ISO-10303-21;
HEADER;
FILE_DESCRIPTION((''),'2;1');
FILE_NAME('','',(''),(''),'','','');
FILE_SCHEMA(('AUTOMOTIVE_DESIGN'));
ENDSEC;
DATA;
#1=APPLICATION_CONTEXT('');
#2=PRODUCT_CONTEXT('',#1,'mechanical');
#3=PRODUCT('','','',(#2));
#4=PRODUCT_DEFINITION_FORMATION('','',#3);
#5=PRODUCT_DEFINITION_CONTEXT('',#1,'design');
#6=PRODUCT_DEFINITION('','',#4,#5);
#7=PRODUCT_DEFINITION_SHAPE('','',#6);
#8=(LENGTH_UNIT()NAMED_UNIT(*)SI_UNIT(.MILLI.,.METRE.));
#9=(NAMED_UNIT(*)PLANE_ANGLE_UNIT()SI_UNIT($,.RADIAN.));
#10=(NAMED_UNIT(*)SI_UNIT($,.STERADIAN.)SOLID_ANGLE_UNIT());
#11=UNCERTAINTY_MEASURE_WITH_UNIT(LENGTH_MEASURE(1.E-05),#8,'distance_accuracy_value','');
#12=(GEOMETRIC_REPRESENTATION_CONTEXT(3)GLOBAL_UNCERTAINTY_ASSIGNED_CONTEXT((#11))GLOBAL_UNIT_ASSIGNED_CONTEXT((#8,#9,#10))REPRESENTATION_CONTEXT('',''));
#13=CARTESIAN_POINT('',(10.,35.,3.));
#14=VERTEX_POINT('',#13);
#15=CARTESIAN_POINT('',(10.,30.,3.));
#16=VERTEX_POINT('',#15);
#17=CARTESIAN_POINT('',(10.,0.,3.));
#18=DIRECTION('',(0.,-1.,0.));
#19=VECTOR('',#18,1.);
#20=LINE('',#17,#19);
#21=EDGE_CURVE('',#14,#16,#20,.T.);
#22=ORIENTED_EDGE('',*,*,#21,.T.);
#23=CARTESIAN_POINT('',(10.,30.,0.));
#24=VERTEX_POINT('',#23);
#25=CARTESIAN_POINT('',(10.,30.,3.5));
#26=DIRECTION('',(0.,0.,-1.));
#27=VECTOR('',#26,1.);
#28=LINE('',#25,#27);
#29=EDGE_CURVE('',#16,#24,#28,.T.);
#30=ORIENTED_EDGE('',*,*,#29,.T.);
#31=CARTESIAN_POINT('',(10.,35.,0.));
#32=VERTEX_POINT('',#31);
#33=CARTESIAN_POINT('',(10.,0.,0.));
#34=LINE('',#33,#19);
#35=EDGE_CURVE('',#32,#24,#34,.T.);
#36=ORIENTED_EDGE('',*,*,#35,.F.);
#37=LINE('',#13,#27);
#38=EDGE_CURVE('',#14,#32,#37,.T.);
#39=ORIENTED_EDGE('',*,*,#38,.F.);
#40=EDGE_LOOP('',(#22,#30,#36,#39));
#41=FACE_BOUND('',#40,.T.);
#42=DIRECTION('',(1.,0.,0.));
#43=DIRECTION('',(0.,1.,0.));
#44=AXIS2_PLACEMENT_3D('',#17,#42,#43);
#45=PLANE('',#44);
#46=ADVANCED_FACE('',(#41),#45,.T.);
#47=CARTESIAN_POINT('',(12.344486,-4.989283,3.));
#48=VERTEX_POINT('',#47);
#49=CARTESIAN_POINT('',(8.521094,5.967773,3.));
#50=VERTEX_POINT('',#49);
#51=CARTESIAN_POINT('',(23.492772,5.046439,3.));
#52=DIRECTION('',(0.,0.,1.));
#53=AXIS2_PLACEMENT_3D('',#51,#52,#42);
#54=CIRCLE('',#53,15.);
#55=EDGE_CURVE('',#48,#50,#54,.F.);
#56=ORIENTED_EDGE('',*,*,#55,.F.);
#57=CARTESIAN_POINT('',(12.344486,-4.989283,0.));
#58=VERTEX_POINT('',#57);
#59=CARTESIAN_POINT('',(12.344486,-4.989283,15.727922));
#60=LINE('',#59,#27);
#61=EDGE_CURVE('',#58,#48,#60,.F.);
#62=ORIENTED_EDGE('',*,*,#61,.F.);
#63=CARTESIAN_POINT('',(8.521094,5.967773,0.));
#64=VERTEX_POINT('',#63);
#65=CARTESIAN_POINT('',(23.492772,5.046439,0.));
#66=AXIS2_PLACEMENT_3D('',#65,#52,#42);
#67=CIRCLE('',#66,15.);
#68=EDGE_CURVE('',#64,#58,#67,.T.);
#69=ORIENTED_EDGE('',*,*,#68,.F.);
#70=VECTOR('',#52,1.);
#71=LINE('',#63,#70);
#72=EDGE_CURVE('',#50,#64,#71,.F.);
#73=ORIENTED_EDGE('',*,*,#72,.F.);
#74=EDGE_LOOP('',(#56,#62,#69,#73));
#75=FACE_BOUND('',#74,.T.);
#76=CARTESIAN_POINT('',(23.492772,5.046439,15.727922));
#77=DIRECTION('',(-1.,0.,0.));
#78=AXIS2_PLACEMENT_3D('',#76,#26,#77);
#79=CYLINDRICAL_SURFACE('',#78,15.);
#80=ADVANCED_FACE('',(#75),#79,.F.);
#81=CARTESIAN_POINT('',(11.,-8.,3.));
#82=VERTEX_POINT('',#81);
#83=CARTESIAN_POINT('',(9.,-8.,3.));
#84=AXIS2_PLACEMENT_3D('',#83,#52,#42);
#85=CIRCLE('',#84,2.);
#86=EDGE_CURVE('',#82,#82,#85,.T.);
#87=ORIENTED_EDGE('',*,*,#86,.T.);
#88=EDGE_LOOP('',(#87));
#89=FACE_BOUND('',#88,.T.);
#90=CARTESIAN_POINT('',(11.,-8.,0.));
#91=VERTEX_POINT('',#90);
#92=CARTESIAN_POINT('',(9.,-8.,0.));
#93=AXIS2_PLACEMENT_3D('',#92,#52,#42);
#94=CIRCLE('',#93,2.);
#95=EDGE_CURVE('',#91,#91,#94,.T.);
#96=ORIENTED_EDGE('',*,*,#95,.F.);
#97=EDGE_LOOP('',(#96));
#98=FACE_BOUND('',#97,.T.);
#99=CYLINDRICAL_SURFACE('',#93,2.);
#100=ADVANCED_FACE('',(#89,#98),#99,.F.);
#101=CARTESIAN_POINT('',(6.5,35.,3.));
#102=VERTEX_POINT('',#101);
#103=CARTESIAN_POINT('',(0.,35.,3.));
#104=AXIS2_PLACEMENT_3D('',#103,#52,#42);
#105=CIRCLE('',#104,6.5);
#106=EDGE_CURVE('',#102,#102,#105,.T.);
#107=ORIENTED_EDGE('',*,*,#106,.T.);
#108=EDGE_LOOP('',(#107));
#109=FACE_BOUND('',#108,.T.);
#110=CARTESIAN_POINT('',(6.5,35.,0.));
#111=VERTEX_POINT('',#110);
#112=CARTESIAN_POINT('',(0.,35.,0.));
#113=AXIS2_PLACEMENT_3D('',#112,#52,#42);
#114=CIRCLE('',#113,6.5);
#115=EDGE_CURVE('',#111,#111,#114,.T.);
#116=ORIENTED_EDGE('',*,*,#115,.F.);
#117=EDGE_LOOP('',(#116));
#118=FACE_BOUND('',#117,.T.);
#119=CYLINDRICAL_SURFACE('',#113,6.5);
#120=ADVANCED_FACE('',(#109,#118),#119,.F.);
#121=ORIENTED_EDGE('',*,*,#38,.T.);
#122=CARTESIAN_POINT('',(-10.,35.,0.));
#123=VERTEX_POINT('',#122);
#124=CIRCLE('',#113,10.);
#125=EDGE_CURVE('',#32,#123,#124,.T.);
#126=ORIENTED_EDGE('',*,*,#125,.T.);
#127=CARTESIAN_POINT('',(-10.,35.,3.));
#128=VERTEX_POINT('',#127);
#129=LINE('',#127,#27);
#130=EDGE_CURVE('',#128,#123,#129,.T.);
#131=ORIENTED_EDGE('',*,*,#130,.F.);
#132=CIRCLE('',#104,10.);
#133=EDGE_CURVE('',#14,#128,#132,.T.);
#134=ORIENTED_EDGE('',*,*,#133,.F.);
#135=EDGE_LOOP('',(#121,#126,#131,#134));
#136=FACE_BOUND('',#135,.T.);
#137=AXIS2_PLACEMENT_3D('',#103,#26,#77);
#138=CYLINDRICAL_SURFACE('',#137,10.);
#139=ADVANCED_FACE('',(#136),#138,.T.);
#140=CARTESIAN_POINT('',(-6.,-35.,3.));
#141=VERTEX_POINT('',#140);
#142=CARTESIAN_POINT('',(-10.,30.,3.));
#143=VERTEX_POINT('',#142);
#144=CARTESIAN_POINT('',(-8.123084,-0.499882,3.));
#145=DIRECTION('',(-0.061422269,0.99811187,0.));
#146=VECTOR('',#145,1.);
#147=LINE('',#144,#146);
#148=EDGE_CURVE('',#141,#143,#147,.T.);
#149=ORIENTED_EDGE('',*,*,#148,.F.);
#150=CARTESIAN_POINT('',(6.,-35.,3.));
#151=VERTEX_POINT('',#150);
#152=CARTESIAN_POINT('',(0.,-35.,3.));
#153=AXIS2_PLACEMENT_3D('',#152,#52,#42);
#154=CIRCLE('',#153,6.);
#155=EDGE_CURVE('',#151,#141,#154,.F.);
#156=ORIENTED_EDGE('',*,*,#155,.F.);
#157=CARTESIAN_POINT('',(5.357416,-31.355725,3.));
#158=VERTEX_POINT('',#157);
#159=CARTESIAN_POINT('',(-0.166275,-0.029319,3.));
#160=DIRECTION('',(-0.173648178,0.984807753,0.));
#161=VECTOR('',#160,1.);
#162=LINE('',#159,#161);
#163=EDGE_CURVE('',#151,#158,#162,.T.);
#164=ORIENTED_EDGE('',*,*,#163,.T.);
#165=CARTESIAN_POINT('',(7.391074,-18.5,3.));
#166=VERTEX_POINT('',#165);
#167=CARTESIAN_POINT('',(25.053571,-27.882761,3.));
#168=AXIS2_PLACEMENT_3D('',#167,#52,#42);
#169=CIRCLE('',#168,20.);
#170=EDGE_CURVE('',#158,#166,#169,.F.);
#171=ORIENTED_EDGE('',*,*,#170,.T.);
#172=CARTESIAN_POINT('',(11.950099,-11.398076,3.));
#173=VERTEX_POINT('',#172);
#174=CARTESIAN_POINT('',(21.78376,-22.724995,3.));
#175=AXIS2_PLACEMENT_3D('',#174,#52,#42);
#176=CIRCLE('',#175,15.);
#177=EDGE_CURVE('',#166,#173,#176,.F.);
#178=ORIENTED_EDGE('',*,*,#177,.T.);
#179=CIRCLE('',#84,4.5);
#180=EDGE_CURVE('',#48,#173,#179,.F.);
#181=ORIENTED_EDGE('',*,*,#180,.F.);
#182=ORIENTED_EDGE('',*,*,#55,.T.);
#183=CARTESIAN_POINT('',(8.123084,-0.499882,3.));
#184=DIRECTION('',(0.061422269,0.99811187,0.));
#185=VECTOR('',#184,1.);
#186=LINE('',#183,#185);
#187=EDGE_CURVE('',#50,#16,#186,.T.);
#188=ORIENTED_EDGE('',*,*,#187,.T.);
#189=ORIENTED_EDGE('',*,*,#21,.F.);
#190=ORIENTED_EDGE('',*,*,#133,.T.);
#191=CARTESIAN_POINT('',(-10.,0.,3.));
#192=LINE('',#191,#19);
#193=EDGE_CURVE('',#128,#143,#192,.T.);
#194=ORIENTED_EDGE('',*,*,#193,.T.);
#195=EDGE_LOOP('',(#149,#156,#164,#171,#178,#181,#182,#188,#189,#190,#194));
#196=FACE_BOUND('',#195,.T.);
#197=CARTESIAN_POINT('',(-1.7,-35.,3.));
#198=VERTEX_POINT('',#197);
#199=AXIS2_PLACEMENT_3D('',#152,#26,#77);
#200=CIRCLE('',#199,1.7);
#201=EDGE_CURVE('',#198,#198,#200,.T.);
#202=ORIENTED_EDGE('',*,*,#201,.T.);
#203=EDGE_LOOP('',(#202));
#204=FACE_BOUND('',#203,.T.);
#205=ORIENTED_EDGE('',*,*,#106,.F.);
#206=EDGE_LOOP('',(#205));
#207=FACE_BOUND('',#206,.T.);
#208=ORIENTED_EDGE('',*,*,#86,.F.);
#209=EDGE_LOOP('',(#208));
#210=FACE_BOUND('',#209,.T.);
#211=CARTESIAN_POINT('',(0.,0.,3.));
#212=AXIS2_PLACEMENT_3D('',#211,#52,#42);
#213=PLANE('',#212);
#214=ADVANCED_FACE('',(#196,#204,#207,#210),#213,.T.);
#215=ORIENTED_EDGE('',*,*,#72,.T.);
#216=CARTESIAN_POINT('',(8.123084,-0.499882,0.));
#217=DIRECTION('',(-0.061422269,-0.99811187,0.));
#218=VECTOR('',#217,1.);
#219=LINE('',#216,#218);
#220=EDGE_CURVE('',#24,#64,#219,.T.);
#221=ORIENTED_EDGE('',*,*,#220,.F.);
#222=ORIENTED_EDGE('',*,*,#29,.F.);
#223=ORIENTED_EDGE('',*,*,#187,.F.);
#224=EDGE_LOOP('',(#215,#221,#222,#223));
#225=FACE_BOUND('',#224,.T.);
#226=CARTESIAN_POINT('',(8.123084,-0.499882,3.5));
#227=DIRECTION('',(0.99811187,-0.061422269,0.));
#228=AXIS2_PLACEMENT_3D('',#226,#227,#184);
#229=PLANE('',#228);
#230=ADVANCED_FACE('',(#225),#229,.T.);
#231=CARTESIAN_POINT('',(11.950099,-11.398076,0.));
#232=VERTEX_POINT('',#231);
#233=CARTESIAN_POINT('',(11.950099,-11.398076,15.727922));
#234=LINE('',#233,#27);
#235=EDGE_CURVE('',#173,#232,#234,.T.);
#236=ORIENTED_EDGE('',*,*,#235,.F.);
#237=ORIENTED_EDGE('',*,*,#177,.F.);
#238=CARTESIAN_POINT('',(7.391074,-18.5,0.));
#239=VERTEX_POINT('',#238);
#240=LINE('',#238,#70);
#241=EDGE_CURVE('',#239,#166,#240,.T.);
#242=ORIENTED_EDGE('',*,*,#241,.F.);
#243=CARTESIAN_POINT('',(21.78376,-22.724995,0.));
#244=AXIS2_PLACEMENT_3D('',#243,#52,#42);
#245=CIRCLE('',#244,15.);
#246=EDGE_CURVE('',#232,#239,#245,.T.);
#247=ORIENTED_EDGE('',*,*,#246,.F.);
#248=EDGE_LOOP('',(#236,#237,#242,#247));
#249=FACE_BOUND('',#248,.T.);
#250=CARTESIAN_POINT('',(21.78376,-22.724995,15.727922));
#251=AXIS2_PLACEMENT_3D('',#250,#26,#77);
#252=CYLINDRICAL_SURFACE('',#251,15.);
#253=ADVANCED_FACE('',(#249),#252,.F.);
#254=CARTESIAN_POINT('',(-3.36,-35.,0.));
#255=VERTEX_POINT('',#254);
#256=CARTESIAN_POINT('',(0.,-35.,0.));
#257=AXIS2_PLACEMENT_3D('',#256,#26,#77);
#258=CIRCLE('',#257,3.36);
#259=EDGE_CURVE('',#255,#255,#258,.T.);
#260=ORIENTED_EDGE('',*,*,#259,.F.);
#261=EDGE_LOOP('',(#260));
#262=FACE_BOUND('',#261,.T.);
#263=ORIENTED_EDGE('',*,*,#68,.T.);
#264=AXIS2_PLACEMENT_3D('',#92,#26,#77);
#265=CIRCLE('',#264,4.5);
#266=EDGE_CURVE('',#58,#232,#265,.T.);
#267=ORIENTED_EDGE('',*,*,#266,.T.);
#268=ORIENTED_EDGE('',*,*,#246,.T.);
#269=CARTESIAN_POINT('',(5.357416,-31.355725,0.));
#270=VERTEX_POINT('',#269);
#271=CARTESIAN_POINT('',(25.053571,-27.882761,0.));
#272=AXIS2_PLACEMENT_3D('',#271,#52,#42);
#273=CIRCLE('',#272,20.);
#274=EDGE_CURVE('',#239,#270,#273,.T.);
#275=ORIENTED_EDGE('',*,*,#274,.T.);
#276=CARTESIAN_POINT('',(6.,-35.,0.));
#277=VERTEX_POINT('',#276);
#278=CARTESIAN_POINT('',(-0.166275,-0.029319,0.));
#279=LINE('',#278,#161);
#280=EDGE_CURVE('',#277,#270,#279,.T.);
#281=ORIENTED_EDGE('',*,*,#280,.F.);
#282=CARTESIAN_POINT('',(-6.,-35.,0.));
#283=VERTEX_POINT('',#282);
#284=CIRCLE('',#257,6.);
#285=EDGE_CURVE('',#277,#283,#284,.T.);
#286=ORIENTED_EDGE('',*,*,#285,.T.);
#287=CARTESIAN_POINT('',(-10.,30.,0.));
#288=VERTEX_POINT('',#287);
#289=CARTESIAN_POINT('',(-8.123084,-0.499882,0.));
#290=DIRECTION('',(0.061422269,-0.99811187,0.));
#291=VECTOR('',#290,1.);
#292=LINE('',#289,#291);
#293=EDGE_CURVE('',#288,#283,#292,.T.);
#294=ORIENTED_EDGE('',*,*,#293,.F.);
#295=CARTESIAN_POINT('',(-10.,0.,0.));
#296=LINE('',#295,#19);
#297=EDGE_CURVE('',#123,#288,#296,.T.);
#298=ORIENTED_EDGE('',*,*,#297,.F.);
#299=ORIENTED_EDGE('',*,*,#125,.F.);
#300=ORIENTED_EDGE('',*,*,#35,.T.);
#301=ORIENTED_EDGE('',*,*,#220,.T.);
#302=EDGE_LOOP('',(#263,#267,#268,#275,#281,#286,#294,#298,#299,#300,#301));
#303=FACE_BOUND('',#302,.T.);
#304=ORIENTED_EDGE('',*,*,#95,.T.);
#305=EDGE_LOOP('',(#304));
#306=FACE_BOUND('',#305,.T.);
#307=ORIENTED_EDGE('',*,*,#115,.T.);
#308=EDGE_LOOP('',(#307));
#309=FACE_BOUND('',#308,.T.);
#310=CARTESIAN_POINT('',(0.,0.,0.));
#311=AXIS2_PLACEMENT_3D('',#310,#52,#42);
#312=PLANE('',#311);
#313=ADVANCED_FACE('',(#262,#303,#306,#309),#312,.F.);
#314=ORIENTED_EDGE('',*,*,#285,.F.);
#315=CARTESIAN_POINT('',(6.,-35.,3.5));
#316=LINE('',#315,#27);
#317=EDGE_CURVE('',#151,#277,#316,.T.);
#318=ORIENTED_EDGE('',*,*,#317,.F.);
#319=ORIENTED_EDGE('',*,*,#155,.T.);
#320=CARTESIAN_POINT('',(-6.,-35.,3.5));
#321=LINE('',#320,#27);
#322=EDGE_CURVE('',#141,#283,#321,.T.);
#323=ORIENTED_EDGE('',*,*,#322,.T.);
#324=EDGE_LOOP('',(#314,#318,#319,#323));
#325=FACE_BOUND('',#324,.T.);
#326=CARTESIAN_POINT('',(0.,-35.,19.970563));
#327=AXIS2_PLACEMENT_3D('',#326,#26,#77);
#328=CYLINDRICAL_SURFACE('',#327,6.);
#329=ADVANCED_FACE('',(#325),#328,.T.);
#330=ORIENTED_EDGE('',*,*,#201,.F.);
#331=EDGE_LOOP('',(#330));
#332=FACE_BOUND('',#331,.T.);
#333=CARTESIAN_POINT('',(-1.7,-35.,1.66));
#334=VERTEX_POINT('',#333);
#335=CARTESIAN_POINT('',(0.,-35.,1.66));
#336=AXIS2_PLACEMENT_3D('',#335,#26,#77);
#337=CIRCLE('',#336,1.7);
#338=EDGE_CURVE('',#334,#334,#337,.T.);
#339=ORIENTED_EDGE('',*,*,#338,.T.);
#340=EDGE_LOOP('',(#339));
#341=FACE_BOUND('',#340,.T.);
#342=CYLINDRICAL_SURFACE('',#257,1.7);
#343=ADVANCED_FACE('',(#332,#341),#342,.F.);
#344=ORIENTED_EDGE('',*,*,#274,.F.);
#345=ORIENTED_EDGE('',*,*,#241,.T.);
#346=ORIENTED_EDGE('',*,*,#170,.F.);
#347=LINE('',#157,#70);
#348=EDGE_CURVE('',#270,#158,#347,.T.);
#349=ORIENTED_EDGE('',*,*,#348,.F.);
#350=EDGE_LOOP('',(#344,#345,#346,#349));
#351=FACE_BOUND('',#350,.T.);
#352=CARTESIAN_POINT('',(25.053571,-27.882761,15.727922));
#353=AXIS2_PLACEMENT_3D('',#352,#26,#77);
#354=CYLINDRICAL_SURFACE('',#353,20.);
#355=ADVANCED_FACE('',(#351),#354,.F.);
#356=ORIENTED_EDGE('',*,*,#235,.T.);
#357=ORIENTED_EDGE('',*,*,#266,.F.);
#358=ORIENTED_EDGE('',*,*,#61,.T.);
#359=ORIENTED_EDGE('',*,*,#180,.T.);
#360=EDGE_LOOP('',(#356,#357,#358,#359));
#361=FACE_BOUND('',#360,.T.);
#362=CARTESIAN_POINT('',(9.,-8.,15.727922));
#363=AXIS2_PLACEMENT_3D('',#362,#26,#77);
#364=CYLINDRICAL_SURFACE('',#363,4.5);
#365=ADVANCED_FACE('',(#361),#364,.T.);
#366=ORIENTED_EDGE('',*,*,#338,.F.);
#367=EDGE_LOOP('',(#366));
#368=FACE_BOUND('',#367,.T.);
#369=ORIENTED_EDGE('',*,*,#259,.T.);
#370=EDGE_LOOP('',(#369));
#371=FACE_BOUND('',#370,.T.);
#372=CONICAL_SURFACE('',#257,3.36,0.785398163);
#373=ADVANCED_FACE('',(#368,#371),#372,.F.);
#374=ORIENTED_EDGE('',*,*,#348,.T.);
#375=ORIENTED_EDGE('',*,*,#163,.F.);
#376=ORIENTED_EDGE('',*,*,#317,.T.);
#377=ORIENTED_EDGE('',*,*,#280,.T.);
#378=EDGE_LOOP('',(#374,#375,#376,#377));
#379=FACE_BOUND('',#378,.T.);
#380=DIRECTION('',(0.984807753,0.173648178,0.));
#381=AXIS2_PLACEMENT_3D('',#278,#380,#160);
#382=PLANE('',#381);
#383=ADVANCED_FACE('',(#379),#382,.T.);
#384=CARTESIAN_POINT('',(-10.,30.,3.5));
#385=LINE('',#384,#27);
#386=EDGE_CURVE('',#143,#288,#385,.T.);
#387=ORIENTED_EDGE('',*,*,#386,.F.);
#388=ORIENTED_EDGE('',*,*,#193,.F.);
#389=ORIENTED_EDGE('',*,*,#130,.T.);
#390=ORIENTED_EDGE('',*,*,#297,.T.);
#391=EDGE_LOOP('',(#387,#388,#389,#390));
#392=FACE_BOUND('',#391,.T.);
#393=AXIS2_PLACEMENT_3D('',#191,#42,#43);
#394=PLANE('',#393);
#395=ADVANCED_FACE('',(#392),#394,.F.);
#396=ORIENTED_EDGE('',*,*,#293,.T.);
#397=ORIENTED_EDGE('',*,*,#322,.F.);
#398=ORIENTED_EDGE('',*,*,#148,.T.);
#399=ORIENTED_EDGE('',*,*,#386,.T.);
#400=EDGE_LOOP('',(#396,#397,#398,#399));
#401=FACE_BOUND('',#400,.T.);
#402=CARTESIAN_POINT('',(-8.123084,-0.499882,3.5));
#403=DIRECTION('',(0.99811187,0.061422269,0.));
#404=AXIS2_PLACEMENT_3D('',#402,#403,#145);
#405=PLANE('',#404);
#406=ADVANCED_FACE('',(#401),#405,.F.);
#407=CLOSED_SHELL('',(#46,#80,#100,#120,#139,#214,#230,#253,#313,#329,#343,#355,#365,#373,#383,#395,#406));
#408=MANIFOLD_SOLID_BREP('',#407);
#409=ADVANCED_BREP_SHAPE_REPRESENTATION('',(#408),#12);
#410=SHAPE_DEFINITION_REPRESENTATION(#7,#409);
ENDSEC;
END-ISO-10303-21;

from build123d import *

# Parameters (mm, degrees)
EXTRUDE_1_DEPTH     = 3
SKETCH_2_R          = 6.5
CUT_EXTRUDE_1_DEPTH = 47.19523785
CUT_EXTRUDE_3_DEPTH = 3.5
SKETCH_4_3_R        = 6
EXTRUDE_3_DEPTH     = 3
SKETCH_5_R          = 1.5
CUT_EXTRUDE_4_DEPTH = 47.19523785
SKETCH_6_R          = 4.5
EXTRUDE_4_DEPTH     = 3
FILLET_1_R          = 15
SKETCH_8_R          = 2
CUT_EXTRUDE_5_DEPTH = 48.077064479
CUT_EXTRUDE_9_DEPTH = 48.077064479
FILLET_3_R          = 20


with BuildPart() as part:
    # 草图1 → 凸台-拉伸1 (new body)
    with BuildSketch(Plane.XY):
        with BuildLine():
            ThreePointArc((10, 35), (0, 45), (-10, 35))
            Line((-10, 35), (10, 35))
        make_face()
        with BuildLine():
            Line((10, 35), (-10, 35))
            ThreePointArc((-10, 35), (0, 25), (10, 35))
        make_face()
        with BuildLine():
            ThreePointArc((10, 35), (0, 25), (-10, 35))
            Line((-10, 35), (-10, -35))
            Line((-10, -35), (10, -35))
            Line((10, -35), (10, 35))
        make_face()
    extrude(amount=EXTRUDE_1_DEPTH)

    # 草图2 → 切除-拉伸1 (cut, through all)
    with BuildSketch(Plane.XY.offset(3)):
        with Locations((0, 35)):
            Circle(SKETCH_2_R)
    extrude(amount=-CUT_EXTRUDE_1_DEPTH, mode=Mode.SUBTRACT)

    # 草图4 → 切除-拉伸3 (cut)
    with BuildSketch(Plane(origin=(0, 0, 0), x_dir=(-1, 0, 0), z_dir=(0, 0, -1))):
        Polygon((10, 30), (6, -35), (10, -35), align=None)
        Polygon((-10, -35), (-6, -35), (-10, 30), align=None)
    extrude(amount=-CUT_EXTRUDE_3_DEPTH, mode=Mode.SUBTRACT)

    # 草图4<3> → 凸台-拉伸3 (add)
    with BuildSketch(Plane(origin=(0, 0, 0), x_dir=(-1, 0, 0), z_dir=(0, 0, -1))):
        with Locations((0, -35)):
            Circle(SKETCH_4_3_R)
    extrude(amount=-EXTRUDE_3_DEPTH)

    # 草图5 → 切除-拉伸4 (cut, through all)
    with BuildSketch(Plane(origin=(0, 0, 0), x_dir=(-1, 0, 0), z_dir=(0, 0, -1))):
        with Locations((0, -35)):
            Circle(SKETCH_5_R)
    extrude(amount=-CUT_EXTRUDE_4_DEPTH, mode=Mode.SUBTRACT)

    # 草图6 → 凸台-拉伸4 (add)
    with BuildSketch(Plane(origin=(0, 0, 0), x_dir=(-1, 0, 0), z_dir=(0, 0, -1))):
        with Locations((-9, -8)):
            Circle(SKETCH_6_R)
    extrude(amount=-EXTRUDE_4_DEPTH)

    # 圆角1
    fillet_1_edges = [part.edges().sort_by_distance(p)[0] for p in [
        (7.930527209, -3.628932859, 1.5),
        (7.402648929, -12.206954903, 1.5),
    ]]
    fillet(fillet_1_edges, radius=FILLET_1_R)

    # 草图8 → 切除-拉伸5 (cut, through all)
    with BuildSketch(Plane.XY.offset(3)):
        with Locations((9, -8)):
            Circle(SKETCH_8_R)
    extrude(amount=-CUT_EXTRUDE_5_DEPTH, mode=Mode.SUBTRACT)

    # 草图11 → 切除-拉伸9 (cut, through all)
    with BuildSketch(Plane.XY.offset(3)):
        with BuildLine():
            Line((3.090604818, -18.5), (6, -35))
            Line((6, -35), (6.812082422, -21.803660643))
            ThreePointArc((6.812082422, -21.803660643), (7.00895024, -20.135596552), (7.391074134, -18.5))
            Line((7.391074134, -18.5), (3.090604818, -18.5))
        make_face()
    extrude(amount=-CUT_EXTRUDE_9_DEPTH, mode=Mode.SUBTRACT)

    # 圆角3
    # the kernel refuses this fillet: 20 mm, written as the material it adds along each edge
    with BuildSketch(Plane(origin=(3.090604818, -18.5, 3), x_dir=(1, 0, 0), z_dir=(0, 0, -1))) as fillet_3_piece_1:
        with BuildLine():
            CenterArc((21.962966165, 9.382761056), FILLET_3_R, 170, 37.978360215)
            Line((2.266811105, 12.85572461), (1.872888004, 12.925183881))
            Line((1.872888004, 12.925183881), (-0.393923101, 0.069459271))
            Line((-0.393923101, 0.069459271), (0, -0.4))
            ThreePointArc((0, -0.4), (2.150234658, -0.4), (3.947219379, -0.187655221))
            Line((3.947219379, -0.187655221), (4.300469316, 0))
        make_face()
    extrude(amount=3)

    # 草图14 → M3 六角凹锥坑螺钉的锥形沉头孔2 (revolve, cut)
    with BuildSketch(Plane(origin=(0, -35, 0), x_dir=(0, 1, 0), z_dir=(1, 0, 0))):
        Polygon((0, 0), (0, 3), (1.7, 3), (1.7, 1.66), (3.36, 0), align=None)
    revolve(axis=Axis((0, -35, -6.35), (0, 0, 1)), mode=Mode.SUBTRACT)


solid = part.part
